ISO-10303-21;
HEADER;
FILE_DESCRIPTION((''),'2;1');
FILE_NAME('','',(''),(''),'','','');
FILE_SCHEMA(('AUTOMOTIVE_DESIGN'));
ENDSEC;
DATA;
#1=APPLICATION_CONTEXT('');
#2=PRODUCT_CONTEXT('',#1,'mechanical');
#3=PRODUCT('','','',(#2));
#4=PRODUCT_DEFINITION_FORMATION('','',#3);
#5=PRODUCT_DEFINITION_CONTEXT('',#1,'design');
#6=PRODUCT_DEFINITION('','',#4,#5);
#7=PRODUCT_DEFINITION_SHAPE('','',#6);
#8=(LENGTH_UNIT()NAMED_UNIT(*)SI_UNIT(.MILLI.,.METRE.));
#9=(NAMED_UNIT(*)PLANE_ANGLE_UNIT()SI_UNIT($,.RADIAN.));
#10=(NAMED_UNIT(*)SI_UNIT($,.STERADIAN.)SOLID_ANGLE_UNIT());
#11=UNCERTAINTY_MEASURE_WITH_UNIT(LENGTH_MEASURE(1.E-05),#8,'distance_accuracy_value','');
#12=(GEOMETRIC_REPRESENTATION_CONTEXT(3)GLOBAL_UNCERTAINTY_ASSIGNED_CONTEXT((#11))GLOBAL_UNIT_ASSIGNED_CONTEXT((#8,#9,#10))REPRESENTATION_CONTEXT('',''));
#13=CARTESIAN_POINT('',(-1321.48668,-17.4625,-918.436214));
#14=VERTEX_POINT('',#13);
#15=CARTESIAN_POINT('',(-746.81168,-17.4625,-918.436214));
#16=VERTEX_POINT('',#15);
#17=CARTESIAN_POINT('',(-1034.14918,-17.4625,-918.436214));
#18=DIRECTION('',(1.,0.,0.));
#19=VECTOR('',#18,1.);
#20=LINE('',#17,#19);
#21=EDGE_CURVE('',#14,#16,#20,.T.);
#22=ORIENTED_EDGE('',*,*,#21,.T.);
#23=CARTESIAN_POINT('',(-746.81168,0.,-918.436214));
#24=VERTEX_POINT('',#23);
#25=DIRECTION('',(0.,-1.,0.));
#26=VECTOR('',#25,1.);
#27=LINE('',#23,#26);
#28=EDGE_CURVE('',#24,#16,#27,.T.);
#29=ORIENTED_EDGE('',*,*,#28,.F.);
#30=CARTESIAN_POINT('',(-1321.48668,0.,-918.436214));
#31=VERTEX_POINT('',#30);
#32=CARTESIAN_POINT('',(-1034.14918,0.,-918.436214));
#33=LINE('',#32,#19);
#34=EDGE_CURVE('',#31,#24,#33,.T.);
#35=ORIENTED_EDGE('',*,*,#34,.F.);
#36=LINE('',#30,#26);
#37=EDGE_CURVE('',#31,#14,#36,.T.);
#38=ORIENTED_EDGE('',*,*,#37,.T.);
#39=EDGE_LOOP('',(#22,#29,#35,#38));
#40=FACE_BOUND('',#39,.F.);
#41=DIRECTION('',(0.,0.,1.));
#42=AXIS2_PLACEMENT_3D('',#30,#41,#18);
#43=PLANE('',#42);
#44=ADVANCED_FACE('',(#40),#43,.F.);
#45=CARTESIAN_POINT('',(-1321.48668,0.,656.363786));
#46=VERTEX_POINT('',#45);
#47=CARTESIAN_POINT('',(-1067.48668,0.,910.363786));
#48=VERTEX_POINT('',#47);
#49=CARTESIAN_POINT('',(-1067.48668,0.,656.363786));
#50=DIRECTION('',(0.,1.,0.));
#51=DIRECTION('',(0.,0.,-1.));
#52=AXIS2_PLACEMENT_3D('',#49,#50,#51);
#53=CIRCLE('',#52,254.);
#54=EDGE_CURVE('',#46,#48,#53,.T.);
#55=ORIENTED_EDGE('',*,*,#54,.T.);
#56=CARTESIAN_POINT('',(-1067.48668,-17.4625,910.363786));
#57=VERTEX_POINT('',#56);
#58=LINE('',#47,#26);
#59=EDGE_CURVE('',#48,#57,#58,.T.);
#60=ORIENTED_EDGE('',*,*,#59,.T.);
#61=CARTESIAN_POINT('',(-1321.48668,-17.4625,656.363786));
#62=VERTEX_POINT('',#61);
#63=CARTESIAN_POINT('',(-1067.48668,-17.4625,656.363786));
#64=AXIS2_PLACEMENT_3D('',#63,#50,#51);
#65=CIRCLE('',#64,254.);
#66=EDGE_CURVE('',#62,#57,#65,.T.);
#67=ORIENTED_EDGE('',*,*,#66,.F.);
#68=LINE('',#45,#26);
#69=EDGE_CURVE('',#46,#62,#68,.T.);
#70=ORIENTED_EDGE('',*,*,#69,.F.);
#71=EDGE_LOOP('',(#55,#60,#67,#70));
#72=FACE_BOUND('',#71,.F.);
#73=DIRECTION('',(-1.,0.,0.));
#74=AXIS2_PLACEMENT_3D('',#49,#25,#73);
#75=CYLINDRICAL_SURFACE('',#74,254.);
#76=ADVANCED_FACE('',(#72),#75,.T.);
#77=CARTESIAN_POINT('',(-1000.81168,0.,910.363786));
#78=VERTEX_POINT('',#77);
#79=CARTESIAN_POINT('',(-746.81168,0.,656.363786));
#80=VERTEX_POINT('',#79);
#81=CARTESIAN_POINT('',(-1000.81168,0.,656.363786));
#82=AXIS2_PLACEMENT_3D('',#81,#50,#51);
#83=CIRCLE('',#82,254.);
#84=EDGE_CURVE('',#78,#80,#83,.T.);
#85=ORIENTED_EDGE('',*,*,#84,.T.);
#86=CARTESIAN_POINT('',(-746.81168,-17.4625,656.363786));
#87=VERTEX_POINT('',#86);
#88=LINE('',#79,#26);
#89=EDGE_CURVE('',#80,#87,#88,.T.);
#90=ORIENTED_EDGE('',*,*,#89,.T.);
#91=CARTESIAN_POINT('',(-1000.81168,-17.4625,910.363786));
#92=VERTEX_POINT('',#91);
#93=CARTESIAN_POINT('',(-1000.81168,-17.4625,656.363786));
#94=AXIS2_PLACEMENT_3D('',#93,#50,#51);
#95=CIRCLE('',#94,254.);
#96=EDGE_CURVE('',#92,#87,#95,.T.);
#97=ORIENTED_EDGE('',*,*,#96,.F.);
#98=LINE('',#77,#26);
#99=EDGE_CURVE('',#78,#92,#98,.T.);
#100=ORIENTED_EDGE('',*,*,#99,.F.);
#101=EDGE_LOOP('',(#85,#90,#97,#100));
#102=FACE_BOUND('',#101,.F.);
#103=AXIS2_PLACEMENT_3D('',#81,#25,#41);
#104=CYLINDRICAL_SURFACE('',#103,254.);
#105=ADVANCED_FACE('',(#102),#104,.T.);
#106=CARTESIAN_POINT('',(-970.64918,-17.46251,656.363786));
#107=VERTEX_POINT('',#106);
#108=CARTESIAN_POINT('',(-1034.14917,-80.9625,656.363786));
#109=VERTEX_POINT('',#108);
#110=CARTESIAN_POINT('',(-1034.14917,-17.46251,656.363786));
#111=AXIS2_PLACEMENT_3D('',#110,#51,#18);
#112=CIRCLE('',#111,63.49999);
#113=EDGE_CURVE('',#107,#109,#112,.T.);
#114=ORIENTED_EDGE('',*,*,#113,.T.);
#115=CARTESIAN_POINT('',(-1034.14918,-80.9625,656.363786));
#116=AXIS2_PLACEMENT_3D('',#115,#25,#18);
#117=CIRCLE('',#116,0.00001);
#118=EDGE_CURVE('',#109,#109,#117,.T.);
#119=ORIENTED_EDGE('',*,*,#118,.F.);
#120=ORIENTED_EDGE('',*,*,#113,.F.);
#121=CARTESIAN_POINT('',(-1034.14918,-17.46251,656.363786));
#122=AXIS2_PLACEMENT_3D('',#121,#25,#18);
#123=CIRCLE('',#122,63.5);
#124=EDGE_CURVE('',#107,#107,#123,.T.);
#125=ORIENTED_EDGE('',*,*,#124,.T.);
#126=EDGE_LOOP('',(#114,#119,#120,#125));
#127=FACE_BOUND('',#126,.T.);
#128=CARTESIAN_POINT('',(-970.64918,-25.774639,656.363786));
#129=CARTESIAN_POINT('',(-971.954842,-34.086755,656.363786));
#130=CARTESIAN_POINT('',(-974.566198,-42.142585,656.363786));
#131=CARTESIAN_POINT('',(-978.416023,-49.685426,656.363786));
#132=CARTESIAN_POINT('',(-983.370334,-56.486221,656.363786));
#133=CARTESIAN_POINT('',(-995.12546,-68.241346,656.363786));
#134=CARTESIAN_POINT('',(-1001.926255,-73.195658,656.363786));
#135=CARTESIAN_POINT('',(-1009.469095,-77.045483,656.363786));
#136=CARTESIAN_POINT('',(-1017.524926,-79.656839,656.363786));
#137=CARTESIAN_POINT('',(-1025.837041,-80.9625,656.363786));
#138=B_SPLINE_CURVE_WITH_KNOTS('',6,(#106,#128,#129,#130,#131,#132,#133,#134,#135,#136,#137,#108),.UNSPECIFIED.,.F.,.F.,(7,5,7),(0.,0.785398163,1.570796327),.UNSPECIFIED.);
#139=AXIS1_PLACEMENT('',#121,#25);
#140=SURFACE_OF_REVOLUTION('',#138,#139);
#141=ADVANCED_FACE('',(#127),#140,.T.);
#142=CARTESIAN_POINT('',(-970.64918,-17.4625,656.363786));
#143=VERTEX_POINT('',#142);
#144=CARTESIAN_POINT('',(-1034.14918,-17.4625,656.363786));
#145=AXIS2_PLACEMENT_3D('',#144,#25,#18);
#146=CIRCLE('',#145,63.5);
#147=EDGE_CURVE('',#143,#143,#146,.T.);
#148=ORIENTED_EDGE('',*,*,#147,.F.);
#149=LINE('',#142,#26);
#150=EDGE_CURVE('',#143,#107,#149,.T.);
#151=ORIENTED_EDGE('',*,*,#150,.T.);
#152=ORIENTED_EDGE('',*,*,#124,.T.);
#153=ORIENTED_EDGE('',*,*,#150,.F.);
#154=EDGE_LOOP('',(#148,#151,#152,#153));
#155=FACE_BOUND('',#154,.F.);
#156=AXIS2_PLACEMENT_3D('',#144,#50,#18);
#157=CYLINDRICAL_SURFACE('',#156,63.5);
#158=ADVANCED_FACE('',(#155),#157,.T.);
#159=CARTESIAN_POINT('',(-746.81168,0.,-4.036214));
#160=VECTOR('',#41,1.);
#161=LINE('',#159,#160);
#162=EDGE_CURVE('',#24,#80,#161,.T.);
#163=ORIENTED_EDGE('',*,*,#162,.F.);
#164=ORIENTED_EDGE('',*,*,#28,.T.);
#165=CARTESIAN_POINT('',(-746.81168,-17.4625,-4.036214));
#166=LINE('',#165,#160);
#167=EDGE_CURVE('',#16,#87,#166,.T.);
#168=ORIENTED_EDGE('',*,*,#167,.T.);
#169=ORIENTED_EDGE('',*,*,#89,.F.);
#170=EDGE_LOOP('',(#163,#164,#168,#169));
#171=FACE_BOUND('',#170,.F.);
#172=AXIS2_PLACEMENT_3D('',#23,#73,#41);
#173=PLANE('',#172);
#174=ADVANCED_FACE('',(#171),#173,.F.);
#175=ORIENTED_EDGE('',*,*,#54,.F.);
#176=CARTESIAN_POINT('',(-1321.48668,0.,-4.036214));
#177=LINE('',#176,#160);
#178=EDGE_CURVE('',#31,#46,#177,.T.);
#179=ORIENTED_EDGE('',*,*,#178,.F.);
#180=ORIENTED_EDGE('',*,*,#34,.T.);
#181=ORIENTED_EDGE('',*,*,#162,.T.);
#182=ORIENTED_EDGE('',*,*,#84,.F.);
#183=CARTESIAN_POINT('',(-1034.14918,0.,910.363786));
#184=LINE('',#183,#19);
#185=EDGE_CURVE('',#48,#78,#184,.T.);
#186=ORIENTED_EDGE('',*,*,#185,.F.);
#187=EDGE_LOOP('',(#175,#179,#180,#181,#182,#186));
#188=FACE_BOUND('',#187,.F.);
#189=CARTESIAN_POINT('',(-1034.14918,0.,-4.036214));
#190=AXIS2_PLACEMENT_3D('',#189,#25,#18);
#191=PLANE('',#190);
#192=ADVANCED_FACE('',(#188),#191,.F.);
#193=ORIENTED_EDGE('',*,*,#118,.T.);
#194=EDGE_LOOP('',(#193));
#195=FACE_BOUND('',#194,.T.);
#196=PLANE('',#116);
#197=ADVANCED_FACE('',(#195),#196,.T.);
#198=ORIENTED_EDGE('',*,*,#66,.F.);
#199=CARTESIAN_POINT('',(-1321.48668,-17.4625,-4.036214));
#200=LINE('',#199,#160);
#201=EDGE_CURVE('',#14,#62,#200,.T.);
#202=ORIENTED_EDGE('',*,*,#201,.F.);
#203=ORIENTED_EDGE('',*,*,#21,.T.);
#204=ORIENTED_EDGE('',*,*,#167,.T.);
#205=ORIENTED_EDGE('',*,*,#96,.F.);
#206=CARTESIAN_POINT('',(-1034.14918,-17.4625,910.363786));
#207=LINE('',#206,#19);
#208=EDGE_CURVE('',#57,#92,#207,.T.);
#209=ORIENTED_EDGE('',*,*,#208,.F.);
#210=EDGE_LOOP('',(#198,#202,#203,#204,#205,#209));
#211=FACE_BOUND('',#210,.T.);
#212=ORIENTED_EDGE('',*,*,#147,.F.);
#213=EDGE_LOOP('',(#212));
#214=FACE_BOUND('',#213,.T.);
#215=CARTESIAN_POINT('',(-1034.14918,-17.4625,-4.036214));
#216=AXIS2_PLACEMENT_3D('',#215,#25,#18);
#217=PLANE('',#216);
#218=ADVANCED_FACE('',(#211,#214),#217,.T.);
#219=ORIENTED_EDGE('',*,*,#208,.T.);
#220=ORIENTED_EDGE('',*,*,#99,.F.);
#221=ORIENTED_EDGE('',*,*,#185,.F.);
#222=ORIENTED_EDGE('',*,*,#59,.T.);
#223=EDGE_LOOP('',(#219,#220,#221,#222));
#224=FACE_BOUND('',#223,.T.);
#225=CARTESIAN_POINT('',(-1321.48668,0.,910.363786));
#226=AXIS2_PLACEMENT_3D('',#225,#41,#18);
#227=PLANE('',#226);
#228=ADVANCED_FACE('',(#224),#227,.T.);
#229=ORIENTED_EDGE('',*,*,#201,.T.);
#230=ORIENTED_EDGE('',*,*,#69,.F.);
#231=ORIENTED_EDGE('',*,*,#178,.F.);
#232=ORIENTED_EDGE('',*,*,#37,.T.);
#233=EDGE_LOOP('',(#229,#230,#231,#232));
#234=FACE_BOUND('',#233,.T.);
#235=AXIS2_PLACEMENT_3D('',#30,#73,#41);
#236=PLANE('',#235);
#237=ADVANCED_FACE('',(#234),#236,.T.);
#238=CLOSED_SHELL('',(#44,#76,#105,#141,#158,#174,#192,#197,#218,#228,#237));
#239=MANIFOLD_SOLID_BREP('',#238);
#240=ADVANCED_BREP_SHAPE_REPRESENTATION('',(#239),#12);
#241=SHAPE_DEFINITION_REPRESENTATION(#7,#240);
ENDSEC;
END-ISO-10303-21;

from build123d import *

# Parameters (mm, degrees)
F0_W     = 574.675
F0_H     = 1828.8
F1_DEPTH = 17.4625
F2_R     = 254
F3_R     = 254
F4_R     = 63.5
F5_DEPTH = 63.5
F6_R     = 63.49999


# Not quite as in the source:
# - a fillet or chamfer is up to 0.001 mm smaller than in the source, because OpenCascade refuses the exact size


with BuildPart() as f1:
    # F0 (on Front) → F1 (new body)
    with BuildSketch(Plane.XZ):
        with Locations((-1034.1491804612, -4.0362142026)):
            Rectangle(F0_W, F0_H)
    extrude(amount=F1_DEPTH)

    # F2
    f2_edges = [f1.edges().sort_by_distance(p)[0] for p in [
        (-1321.48668, -8.73125, 910.363786),
    ]]
    fillet(f2_edges, radius=F2_R)

    # F3
    f3_edges = [f1.edges().sort_by_distance(p)[0] for p in [
        (-746.81168, -8.73125, 910.363786),
    ]]
    fillet(f3_edges, radius=F3_R)

    # F4 (on face) → F5 (join)
    with BuildSketch(Plane.XZ.offset(17.4625)):
        with Locations((-1034.1491804612, 656.3637857974)):
            Circle(F4_R)
    extrude(amount=F5_DEPTH)

    # F6 (radius 63.5 in the source; OpenCascade refuses exactly that, so slightly less here)
    f6_edges = [f1.edges().sort_by_distance(p)[0] for p in [
        (-1097.64918, -80.9625, 656.363786),
    ]]
    fillet(f6_edges, radius=F6_R)


solid = f1.part
